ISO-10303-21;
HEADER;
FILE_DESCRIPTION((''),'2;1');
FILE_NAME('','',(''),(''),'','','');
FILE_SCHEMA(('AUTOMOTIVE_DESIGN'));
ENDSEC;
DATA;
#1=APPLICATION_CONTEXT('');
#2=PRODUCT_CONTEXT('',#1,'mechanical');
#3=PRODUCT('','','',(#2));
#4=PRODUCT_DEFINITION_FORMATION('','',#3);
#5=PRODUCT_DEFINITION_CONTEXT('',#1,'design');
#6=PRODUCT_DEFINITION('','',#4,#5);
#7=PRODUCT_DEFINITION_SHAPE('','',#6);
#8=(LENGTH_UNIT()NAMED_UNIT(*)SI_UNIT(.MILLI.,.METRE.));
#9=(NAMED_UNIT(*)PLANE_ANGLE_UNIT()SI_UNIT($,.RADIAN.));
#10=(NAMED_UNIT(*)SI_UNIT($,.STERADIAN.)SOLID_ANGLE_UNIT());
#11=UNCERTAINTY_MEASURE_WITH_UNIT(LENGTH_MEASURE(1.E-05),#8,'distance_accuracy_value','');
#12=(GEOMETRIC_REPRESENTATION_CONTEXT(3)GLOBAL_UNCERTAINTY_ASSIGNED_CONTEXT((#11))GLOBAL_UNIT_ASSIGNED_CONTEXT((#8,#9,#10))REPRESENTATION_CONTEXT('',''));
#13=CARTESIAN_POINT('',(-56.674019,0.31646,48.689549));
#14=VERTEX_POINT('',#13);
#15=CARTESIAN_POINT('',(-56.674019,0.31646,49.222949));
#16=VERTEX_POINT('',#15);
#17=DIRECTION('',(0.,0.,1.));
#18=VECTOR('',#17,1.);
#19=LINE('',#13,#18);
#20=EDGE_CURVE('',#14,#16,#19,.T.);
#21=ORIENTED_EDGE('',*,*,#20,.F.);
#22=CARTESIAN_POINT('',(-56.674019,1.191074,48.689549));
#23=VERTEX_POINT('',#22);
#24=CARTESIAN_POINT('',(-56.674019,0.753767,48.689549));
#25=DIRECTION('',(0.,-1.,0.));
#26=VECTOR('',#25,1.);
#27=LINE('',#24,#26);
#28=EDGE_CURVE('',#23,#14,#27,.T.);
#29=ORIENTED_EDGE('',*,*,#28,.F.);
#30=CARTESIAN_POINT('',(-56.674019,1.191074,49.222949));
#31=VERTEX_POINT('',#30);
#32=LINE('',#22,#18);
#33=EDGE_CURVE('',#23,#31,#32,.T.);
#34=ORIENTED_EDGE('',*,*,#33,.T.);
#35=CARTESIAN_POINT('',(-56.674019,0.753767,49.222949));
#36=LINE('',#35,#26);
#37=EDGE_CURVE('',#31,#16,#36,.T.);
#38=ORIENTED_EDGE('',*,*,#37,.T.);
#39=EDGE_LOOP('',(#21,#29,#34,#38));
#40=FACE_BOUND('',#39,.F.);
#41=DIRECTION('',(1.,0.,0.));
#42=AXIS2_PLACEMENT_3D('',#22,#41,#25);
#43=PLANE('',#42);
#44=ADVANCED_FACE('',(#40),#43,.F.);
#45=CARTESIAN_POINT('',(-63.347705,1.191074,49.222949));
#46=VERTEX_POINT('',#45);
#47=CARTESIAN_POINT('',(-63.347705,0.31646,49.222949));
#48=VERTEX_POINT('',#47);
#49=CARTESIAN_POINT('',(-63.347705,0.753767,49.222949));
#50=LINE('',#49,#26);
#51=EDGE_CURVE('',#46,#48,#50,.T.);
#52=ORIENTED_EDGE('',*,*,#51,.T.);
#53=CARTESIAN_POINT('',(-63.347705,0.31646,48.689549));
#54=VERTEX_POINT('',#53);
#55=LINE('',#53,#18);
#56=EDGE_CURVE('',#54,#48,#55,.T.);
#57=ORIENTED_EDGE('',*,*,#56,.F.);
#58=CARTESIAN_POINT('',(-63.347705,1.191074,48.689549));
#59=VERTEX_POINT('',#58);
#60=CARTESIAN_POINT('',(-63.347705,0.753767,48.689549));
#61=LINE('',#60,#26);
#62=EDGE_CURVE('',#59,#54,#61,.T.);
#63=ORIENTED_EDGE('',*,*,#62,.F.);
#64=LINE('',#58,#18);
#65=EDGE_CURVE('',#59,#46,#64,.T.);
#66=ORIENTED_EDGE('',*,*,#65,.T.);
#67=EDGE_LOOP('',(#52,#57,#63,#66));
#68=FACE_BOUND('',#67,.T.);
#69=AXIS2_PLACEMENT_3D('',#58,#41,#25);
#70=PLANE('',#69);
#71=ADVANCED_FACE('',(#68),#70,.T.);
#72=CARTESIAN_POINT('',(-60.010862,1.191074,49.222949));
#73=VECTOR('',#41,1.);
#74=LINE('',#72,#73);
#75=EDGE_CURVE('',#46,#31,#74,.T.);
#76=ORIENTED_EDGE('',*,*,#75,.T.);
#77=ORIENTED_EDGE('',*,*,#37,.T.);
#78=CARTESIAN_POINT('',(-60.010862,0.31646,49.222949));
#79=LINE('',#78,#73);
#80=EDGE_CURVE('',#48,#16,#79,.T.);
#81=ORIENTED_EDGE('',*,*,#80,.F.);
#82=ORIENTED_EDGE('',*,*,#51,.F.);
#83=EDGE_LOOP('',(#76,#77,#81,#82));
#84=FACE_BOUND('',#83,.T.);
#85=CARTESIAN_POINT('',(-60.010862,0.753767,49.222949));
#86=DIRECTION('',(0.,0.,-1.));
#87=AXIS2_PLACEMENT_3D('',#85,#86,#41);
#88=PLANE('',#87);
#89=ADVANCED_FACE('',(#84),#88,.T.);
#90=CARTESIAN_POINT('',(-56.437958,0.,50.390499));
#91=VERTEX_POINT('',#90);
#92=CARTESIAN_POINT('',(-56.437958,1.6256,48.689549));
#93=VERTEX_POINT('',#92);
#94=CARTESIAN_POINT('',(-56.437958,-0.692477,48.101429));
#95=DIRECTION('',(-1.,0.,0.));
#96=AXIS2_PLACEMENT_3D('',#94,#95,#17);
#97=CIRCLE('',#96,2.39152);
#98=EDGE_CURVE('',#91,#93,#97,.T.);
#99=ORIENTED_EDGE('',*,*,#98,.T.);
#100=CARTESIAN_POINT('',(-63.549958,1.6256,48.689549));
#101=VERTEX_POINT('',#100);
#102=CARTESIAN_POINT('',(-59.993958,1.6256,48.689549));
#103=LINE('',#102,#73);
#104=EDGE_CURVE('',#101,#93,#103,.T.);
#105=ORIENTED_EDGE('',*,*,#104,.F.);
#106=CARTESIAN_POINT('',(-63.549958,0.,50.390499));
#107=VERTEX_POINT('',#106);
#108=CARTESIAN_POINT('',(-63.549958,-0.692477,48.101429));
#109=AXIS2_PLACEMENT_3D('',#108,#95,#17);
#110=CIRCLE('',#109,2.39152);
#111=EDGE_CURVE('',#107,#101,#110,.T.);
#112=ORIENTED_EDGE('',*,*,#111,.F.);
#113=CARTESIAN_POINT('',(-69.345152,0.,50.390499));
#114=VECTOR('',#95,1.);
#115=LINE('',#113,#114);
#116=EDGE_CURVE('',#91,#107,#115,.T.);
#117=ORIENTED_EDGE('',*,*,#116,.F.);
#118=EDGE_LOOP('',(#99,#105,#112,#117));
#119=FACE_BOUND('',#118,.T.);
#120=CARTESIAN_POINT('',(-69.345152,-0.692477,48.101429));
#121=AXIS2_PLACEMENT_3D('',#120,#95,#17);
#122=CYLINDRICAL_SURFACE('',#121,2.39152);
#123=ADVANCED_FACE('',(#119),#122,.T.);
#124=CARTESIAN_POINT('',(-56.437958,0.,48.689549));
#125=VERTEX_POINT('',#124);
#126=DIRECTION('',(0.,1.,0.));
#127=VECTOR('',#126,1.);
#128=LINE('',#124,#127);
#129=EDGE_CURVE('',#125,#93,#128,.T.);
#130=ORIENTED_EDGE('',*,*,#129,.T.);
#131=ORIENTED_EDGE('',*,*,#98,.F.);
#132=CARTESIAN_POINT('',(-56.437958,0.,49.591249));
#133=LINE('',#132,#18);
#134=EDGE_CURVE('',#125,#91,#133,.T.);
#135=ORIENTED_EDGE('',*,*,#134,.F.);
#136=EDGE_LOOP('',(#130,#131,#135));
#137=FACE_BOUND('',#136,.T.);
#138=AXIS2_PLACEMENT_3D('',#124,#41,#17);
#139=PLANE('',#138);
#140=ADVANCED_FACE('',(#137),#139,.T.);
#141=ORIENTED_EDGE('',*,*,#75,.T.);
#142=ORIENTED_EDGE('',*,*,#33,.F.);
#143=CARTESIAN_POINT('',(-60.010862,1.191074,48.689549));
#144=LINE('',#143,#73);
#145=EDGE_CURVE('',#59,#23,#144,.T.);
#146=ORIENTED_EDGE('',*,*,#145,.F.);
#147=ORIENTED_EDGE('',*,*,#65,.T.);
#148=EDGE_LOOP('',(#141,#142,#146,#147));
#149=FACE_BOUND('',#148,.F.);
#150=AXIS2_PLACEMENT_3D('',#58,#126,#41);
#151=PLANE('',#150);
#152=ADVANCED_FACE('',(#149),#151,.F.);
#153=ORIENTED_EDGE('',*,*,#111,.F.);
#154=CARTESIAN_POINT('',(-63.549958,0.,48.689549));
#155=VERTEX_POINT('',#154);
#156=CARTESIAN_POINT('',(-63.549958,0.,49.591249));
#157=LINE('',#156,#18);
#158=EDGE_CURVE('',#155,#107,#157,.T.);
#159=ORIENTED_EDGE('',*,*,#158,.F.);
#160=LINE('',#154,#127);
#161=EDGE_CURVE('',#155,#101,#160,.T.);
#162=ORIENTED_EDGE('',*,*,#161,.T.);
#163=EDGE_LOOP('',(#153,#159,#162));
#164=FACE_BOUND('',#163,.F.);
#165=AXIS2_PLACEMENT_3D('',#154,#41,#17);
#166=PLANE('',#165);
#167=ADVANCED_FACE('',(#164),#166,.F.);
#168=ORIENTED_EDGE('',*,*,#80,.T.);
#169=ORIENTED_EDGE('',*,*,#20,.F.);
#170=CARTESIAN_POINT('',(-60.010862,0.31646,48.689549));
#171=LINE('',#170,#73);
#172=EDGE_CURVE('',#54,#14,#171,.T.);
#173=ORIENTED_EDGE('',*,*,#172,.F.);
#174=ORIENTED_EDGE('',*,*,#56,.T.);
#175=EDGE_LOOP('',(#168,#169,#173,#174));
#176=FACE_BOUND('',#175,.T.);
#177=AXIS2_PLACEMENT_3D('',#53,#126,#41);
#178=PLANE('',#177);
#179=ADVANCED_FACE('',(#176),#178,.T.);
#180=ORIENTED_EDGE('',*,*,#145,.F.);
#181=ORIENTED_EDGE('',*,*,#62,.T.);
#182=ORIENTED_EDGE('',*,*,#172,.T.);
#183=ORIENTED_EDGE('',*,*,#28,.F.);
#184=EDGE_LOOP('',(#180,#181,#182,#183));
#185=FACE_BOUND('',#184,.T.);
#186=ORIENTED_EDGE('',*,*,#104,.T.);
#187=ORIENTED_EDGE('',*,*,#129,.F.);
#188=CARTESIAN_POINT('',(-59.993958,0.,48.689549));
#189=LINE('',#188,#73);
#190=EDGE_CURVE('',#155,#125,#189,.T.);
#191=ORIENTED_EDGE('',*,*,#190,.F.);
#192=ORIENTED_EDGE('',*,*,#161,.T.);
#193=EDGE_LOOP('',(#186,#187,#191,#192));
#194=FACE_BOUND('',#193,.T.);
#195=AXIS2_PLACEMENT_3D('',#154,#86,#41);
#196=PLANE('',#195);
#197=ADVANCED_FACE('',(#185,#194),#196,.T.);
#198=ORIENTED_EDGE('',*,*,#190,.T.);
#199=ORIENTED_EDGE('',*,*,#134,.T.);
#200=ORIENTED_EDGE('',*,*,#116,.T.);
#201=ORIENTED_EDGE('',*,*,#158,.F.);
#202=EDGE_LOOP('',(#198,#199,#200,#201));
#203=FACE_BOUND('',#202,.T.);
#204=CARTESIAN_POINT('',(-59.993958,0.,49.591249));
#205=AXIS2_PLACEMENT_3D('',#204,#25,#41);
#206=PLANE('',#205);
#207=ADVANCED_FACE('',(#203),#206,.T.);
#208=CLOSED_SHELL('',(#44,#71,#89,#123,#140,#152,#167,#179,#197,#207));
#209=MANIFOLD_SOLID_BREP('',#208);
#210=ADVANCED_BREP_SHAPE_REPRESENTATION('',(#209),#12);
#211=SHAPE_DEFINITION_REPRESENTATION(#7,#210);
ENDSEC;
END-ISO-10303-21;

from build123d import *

# Parameters (mm, degrees)
F0_W        = 7.112
F0_H        = 1.8034
F1_DEPTH    = 1.6256
F2_T1_DEPTH = 18.7023867637
F3_W        = 6.6736862063
F3_H        = 0.8746144013
F4_DEPTH    = 0.5334


# Not quite as in the source:
# - a fillet or chamfer that OpenCascade refuses, or shapes differently, is made with other operations: its cross-section is extruded or revolved along the edge and cut away or added


with BuildPart() as f1:
    # F0 (on Front) → F1 (new body)
    with BuildSketch(Plane.XZ):
        with Locations((-59.9939581946, 49.5912485233)):
            Rectangle(F0_W, F0_H)
    extrude(amount=-F1_DEPTH)

    # F2: fillet of radius 2.3915199549 on 1 edges, made by hand

    # F2_s2 → F2_t1 (cut)
    with BuildSketch(Plane.YZ.offset(-69.3451515765)):
        with BuildLine():
            ThreePointArc((-0.6924773527, 50.4929485233), (0.7760026585, 49.9890021832), (1.6256, 48.6895485233))
            Line((1.6256, 48.6895485233), (1.6719615471, 48.7013109224))
            ThreePointArc((1.6719615471, 48.7013109224), (1.6734303991, 49.5912485233), (1.6734303991, 50.4929485233))
            Line((1.6734303991, 50.4929485233), (1.6256, 50.5407789224))
            Line((1.6256, 50.5407789224), (-0.6924773527, 50.5407789224))
            Line((-0.6924773527, 50.5407789224), (-0.6924773527, 50.4929485233))
        make_face()
    extrude(amount=F2_T1_DEPTH, mode=Mode.SUBTRACT)

    # F3 (on face) → F4 (cut)
    with BuildSketch(Plane(origin=(0, 0, 48.6895485233), x_dir=(1, 0, 0), z_dir=(0, 0, -1))):
        with Locations((-60.0108616054, -0.7537669444)):
            Rectangle(F3_W, F3_H)
    extrude(amount=-F4_DEPTH, mode=Mode.SUBTRACT)


solid = f1.part
